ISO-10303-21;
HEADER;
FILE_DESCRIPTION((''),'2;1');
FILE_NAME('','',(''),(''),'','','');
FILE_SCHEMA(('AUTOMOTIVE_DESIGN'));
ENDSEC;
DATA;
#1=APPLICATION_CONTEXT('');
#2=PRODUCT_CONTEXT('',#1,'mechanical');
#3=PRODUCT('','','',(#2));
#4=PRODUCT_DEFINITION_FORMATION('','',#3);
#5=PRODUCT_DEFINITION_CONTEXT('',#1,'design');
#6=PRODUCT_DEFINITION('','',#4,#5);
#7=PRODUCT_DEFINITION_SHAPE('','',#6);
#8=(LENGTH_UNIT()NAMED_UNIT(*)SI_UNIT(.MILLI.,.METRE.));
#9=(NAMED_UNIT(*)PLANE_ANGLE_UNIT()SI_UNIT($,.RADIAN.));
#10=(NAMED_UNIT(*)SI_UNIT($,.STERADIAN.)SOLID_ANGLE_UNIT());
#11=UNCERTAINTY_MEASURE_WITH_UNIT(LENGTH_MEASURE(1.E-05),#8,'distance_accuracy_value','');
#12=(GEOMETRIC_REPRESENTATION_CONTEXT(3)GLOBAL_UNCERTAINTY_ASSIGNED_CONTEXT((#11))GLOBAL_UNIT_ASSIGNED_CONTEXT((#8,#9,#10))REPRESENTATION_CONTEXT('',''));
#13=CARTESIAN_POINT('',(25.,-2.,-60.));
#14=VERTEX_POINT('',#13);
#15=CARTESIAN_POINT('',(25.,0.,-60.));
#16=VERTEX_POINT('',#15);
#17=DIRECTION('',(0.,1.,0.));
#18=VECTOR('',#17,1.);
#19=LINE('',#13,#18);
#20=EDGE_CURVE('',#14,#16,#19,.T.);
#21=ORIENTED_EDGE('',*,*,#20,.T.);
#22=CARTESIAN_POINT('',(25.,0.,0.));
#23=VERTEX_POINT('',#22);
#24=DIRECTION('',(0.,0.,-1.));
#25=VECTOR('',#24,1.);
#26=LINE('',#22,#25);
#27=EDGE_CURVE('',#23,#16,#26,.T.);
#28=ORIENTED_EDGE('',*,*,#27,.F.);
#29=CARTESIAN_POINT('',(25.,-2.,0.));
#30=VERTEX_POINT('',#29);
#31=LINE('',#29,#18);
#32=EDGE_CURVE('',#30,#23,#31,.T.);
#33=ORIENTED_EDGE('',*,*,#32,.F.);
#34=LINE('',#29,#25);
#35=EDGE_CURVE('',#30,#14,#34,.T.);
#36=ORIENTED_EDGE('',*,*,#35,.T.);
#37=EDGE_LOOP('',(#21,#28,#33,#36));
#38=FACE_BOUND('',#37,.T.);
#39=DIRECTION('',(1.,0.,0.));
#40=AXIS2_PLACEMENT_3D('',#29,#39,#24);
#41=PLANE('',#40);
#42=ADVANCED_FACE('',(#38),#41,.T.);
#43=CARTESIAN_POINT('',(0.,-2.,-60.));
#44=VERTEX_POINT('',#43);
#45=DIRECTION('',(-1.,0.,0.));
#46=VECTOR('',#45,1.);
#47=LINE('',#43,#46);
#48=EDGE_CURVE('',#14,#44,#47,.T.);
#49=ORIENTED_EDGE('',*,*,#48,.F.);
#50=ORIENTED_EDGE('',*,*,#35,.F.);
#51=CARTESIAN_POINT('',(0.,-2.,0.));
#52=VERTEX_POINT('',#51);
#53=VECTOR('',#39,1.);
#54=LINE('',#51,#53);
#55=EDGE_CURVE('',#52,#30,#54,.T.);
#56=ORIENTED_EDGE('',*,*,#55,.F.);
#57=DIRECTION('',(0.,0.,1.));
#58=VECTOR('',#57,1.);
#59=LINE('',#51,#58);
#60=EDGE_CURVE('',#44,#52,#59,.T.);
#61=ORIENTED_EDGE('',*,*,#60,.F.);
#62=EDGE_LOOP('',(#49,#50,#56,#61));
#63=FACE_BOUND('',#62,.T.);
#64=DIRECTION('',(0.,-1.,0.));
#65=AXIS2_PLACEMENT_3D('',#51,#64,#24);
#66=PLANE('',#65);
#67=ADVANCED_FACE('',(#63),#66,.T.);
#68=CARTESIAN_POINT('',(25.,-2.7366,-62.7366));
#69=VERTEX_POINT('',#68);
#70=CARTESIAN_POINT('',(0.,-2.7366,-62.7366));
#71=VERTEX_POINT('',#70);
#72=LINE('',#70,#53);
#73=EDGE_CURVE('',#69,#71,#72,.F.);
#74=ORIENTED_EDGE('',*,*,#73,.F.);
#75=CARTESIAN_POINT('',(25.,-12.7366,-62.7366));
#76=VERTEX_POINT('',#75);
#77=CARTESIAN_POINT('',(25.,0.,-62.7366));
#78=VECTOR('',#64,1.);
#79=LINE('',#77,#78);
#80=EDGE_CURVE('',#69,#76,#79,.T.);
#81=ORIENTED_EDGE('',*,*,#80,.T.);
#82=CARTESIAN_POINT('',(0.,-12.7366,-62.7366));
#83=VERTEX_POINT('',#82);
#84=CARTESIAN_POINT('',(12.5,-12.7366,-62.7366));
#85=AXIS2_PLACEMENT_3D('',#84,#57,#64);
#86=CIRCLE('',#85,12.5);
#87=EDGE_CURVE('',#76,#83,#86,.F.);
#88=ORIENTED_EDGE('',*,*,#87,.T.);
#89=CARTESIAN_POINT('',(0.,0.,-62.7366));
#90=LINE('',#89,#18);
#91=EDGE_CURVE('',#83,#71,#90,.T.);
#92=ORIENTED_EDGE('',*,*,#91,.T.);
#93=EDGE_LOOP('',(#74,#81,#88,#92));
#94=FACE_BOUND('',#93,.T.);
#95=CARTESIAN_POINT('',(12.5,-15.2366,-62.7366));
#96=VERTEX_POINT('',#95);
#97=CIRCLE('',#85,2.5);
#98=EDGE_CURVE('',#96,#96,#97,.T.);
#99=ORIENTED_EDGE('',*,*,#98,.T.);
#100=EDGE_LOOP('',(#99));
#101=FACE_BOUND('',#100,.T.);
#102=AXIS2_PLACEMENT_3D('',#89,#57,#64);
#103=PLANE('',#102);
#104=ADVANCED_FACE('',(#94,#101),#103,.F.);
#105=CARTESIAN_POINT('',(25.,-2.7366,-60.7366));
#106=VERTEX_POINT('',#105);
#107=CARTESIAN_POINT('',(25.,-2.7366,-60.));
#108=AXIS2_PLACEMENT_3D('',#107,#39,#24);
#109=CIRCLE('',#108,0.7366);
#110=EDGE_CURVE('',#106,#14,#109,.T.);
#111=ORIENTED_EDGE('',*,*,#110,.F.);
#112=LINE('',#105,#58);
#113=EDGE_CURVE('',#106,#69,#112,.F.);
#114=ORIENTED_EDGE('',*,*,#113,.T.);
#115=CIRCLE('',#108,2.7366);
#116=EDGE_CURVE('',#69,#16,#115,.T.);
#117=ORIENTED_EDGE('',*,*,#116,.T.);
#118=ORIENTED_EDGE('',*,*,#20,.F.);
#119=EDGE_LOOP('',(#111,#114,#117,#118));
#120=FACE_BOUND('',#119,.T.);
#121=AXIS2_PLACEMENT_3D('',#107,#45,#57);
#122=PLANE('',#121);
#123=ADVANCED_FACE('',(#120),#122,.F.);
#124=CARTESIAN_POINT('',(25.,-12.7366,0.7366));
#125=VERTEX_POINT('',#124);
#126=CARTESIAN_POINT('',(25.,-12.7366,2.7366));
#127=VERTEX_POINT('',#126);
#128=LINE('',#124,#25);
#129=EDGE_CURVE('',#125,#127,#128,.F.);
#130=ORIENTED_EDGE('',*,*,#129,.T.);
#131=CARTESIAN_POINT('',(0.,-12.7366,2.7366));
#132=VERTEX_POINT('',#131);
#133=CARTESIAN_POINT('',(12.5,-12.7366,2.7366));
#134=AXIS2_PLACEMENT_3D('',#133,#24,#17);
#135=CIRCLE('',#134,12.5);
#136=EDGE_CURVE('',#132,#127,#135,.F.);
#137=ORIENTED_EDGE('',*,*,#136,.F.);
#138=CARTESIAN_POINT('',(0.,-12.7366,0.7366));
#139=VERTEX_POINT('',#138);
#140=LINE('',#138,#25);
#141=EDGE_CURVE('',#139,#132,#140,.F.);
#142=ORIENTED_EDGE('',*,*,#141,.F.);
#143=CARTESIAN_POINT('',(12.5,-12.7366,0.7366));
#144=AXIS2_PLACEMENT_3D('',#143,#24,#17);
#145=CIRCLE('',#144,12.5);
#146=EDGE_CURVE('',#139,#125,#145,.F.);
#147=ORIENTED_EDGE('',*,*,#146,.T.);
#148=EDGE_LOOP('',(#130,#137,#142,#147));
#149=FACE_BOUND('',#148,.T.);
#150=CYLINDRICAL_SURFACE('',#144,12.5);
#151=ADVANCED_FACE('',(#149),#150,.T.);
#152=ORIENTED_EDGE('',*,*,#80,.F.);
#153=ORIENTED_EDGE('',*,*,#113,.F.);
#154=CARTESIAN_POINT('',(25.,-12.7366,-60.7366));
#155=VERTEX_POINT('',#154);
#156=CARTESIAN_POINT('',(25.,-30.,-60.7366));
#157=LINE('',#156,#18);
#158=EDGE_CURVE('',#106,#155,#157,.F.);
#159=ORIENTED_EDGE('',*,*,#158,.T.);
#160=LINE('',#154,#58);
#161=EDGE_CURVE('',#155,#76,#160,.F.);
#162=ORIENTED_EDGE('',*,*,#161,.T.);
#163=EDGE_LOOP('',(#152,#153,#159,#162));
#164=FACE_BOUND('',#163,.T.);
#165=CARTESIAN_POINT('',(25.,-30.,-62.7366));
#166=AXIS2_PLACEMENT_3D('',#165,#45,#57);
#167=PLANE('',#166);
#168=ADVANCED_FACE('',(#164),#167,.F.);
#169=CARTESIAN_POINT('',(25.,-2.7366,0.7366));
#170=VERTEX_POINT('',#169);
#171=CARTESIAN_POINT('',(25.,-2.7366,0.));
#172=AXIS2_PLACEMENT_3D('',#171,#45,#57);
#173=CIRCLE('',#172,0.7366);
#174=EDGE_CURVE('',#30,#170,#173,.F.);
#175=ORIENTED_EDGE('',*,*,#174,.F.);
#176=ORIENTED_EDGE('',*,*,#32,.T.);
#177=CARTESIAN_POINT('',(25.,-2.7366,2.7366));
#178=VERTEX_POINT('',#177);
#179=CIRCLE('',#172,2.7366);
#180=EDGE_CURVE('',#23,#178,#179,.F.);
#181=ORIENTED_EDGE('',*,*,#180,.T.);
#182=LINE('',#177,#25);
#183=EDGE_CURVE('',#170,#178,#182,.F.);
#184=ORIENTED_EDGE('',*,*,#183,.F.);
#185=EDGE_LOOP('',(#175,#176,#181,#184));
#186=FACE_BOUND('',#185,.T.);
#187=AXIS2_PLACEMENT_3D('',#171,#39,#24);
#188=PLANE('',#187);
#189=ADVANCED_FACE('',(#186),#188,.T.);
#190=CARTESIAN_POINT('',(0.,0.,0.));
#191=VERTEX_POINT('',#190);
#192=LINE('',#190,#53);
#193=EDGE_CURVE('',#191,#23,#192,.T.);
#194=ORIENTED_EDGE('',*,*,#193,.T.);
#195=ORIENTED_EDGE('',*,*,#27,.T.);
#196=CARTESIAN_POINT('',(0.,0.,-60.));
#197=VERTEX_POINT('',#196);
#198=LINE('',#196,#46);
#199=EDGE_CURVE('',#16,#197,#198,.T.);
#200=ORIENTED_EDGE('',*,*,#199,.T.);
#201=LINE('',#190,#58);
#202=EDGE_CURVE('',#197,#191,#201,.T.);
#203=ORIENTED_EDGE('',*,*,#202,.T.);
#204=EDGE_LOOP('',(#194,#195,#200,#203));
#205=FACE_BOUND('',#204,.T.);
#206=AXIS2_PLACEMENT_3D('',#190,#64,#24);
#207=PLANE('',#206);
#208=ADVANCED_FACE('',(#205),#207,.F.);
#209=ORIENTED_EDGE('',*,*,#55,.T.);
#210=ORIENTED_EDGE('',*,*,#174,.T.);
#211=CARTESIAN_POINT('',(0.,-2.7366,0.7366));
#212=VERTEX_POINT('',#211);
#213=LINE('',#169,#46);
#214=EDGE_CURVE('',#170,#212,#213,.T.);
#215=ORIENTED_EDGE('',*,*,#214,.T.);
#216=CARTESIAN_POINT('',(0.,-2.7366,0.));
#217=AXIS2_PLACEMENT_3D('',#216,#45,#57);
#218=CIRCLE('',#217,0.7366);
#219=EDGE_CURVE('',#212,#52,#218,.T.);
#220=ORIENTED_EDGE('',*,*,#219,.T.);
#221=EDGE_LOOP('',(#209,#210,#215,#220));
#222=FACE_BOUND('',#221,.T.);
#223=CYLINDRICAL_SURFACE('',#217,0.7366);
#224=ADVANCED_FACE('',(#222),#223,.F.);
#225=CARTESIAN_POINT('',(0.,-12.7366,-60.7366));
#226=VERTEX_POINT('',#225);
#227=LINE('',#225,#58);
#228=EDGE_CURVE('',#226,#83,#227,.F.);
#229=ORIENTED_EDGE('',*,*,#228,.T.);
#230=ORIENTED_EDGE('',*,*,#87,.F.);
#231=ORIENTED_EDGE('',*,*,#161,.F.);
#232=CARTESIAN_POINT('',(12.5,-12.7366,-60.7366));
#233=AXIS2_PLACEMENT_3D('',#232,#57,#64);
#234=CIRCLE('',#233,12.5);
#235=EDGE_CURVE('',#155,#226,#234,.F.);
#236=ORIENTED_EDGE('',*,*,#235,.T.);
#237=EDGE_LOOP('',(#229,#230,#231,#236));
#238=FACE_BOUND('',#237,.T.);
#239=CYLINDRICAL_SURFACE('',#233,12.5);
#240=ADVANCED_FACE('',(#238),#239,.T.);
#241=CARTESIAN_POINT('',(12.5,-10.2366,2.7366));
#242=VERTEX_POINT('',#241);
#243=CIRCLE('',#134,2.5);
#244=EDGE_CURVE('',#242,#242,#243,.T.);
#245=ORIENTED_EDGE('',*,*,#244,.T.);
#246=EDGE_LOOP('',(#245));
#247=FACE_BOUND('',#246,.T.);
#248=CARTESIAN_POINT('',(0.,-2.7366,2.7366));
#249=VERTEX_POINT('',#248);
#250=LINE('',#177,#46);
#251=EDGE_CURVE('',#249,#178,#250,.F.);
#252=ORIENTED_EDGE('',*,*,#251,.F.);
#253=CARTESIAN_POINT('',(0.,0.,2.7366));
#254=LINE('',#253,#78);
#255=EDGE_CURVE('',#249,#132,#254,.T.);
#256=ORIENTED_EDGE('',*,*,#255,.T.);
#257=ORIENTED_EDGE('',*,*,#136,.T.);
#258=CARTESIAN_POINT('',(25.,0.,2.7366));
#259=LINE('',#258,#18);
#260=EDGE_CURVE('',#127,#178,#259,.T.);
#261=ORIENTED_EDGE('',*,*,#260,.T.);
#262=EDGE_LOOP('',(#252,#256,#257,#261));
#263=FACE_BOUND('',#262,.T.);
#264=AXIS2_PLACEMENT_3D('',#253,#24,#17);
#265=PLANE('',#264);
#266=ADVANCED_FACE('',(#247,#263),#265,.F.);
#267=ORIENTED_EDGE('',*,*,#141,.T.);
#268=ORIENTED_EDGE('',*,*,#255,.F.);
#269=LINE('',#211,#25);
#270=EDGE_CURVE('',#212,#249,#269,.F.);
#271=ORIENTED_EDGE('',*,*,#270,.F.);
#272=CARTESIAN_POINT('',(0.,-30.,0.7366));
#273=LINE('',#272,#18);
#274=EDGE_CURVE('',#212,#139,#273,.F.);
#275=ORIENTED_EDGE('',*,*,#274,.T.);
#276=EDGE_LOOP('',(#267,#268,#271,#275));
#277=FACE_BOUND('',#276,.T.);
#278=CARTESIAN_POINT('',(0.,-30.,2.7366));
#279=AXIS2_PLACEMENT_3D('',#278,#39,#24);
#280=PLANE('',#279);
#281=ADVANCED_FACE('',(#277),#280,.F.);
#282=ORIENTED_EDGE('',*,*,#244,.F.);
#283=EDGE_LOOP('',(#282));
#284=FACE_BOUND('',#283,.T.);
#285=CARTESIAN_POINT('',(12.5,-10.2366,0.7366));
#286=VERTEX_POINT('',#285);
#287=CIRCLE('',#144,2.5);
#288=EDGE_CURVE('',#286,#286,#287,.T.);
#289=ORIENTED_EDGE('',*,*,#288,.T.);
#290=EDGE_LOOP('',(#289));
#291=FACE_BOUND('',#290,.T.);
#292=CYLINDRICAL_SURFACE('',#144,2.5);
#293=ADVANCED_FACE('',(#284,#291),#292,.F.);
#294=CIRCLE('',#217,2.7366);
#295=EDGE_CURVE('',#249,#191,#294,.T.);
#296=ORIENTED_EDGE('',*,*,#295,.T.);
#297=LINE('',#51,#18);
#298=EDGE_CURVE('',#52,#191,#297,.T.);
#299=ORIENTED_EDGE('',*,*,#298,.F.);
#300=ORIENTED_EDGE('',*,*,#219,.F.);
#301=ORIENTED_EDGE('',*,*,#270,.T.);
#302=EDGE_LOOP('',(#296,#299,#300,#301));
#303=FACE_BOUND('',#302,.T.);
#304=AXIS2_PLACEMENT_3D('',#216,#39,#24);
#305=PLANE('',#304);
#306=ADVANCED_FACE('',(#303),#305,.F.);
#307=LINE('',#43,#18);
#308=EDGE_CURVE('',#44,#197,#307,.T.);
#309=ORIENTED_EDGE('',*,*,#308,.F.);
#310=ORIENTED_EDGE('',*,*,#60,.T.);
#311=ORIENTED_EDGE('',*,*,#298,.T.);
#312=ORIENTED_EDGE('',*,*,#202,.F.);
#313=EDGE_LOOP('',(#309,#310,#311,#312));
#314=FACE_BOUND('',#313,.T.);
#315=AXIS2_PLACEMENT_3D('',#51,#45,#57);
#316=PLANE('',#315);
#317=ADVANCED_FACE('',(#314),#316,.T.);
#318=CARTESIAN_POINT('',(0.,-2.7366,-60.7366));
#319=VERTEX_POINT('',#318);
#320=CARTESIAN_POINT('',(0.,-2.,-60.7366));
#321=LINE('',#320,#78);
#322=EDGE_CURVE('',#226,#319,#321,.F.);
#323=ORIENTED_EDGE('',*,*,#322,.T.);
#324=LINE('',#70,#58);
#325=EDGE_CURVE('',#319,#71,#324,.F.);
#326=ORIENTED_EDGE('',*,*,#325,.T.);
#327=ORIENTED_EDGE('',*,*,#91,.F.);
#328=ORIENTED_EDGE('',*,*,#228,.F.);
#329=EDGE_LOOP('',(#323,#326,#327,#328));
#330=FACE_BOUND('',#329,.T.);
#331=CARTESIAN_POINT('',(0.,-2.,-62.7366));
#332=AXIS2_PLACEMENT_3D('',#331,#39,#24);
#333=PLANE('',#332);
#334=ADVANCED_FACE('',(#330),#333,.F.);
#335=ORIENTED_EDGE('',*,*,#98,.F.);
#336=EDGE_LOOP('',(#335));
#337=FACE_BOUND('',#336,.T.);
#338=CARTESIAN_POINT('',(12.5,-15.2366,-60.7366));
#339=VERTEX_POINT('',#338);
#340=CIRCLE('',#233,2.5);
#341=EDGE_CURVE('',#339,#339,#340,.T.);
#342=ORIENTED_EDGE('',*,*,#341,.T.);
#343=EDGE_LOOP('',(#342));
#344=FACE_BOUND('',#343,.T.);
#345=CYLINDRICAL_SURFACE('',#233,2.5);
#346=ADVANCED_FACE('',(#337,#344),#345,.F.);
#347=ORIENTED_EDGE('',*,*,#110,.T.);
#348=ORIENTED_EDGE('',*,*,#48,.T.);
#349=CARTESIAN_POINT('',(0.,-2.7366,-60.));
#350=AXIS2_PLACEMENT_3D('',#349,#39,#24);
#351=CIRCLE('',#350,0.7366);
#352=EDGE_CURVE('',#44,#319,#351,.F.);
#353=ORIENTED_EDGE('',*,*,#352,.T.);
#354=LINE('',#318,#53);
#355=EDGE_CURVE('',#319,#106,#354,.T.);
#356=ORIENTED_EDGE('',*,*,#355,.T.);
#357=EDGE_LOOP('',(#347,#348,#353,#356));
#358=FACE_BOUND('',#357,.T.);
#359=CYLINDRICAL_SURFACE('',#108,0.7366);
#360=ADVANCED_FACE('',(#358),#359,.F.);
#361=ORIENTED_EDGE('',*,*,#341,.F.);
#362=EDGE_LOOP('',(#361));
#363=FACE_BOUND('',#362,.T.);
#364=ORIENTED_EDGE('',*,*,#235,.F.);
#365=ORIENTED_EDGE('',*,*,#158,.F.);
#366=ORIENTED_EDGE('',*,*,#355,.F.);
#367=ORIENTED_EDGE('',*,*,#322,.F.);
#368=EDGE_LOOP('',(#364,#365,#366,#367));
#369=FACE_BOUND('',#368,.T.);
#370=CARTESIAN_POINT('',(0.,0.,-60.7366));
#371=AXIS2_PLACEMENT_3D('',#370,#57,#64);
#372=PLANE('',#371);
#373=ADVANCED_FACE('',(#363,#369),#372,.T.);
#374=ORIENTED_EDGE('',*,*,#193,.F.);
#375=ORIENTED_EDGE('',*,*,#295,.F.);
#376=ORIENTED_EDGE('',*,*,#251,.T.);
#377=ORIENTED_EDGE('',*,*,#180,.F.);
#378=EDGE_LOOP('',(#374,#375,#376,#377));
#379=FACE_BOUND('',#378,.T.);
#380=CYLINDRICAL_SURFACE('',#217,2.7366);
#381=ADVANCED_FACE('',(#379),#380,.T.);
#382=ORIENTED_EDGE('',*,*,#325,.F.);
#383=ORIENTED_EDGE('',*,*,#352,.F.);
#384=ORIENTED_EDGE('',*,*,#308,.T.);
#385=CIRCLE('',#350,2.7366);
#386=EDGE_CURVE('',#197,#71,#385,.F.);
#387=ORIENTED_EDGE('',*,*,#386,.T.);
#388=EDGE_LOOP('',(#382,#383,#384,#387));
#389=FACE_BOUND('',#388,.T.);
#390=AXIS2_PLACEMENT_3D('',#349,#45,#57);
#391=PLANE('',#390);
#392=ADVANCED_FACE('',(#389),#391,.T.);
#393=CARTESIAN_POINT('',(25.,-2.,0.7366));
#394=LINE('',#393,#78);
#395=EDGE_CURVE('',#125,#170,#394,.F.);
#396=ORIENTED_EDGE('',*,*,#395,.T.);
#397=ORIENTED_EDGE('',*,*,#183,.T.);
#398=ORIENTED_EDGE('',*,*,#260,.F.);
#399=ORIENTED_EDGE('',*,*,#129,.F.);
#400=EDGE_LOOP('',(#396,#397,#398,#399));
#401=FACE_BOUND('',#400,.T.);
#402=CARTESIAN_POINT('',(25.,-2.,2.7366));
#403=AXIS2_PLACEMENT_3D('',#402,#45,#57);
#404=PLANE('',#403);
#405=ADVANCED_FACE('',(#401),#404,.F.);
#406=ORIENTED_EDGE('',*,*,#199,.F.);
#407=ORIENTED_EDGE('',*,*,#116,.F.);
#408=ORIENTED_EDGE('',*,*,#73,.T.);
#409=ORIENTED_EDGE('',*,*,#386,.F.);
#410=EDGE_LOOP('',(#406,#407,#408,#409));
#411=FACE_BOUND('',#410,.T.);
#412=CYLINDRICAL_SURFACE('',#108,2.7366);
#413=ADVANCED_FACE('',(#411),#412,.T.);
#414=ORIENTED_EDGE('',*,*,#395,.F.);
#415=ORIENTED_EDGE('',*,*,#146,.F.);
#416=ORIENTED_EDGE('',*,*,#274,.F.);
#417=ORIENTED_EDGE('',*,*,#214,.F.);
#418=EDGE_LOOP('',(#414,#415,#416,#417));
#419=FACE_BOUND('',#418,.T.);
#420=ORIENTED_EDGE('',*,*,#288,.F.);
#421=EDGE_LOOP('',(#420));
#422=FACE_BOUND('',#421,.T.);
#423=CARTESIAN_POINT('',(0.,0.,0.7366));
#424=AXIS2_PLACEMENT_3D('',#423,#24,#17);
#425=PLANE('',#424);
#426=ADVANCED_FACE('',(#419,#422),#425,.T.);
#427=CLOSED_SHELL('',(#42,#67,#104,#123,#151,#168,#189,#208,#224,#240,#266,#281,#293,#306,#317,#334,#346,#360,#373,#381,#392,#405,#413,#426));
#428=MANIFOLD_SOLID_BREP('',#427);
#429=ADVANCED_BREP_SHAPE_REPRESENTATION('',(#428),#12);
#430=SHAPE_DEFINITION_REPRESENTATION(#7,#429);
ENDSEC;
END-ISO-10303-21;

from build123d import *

# Parameters (mm, degrees)
SKETCH1_W               = 25
SKETCH1_H               = 60
BASE_FLANGE1_DEPTH      = 2
EDGE_FLANGE1_DEPTH      = 25
EDGE_FLANGE1_BEND_DEPTH = 25
CUT_EXTRUDE1_REACH      = 78.235
SKETCH12_R              = 2.5


# Sheet-metal steps are written as plain solids
with BuildPart() as part:
    # Sketch1 → Base-Flange1 (new body)
    with BuildSketch(Plane(origin=(0, 0, 0), x_dir=(1, 0, 0), z_dir=(0, 1, 0))):
        with Locations((12.5, 30)):
            Rectangle(SKETCH1_W, SKETCH1_H)
    extrude(amount=-BASE_FLANGE1_DEPTH)

    # Edge-Flange1 section (across the edge) → Edge-Flange1 (add)
    with BuildSketch(Plane(origin=(25, -2, 0.7366), x_dir=(0, 0, -1), z_dir=(-1, 0, 0))):
        with BuildLine():
            Line((-2, 0.7366), (-2, 28))
            Line((-2, 28), (0, 28))
            Line((0, 28), (0, 0.7366))
            ThreePointArc((0, 0.7366), (0.215745145, 0.215745145), (0.7366, 0))
            Line((0.7366, 0), (0.7366, -2))
            ThreePointArc((0.7366, -2), (-1.198468417, -1.198468417), (-2, 0.7366))
        make_face()
    extrude(amount=EDGE_FLANGE1_DEPTH)

    # Edge-Flange1 section 2 (across the edge) → Edge-Flange1 bend (add)
    with BuildSketch(Plane(origin=(0, -2, -60.7366), x_dir=(0, 0, 1), z_dir=(1, 0, 0))):
        with BuildLine():
            Line((-2, 0.7366), (-2, 28))
            Line((-2, 28), (0, 28))
            Line((0, 28), (0, 0.7366))
            ThreePointArc((0, 0.7366), (0.215745145, 0.215745145), (0.7366, 0))
            Line((0.7366, 0), (0.7366, -2))
            ThreePointArc((0.7366, -2), (-1.198468417, -1.198468417), (-2, 0.7366))
        make_face()
    extrude(amount=EDGE_FLANGE1_BEND_DEPTH)

    # Cut-Extrude1: up to this face of the body (flat: up to its plane)
    cut_extrude1_end = Plane(part.part.faces().sort_by_distance((12.5, -16.3683, 2.7366))[0])
    # Sketch12 → Cut-Extrude1 (cut, up to the picked face)
    with BuildSketch(Plane(origin=(0, 0, -62.7366), x_dir=(-1, 0, 0), z_dir=(0, 0, -1)), mode=Mode.PRIVATE) as cut_extrude1_sk1:
        with Locations(Location((-12.5, -12.7366, 0), (0, 0, 90))):
            Circle(SKETCH12_R)
    cut_extrude1_tool1 = split(extrude(cut_extrude1_sk1.sketch, amount=-CUT_EXTRUDE1_REACH, mode=Mode.PRIVATE), bisect_by=cut_extrude1_end, keep=Keep.BOTH, mode=Mode.PRIVATE)
    # Sketch12 → Cut-Extrude1 (cut, up to the picked face)
    with BuildSketch(Plane(origin=(0, 0, -62.7366), x_dir=(-1, 0, 0), z_dir=(0, 0, -1)), mode=Mode.PRIVATE) as cut_extrude1_sk2:
        with BuildLine():
            Line((-25, -12.7366), (-25, -30))
            Line((-25, -30), (0, -30))
            Line((0, -30), (0, -12.7366))
            ThreePointArc((0, -12.7366), (-12.5, -25.2366), (-25, -12.7366))
        make_face()
    cut_extrude1_tool2 = split(extrude(cut_extrude1_sk2.sketch, amount=-CUT_EXTRUDE1_REACH, mode=Mode.PRIVATE), bisect_by=cut_extrude1_end, keep=Keep.BOTH, mode=Mode.PRIVATE)
    add(cut_extrude1_tool1.solids().sort_by(Axis((12.5, -12.7366, -62.7366), (0, 0, 1)))[0], mode=Mode.SUBTRACT)
    add(cut_extrude1_tool2.solids().sort_by(Axis((12.5, -25.754349, -62.7366), (0, 0, 1)))[0], mode=Mode.SUBTRACT)


solid = part.part
